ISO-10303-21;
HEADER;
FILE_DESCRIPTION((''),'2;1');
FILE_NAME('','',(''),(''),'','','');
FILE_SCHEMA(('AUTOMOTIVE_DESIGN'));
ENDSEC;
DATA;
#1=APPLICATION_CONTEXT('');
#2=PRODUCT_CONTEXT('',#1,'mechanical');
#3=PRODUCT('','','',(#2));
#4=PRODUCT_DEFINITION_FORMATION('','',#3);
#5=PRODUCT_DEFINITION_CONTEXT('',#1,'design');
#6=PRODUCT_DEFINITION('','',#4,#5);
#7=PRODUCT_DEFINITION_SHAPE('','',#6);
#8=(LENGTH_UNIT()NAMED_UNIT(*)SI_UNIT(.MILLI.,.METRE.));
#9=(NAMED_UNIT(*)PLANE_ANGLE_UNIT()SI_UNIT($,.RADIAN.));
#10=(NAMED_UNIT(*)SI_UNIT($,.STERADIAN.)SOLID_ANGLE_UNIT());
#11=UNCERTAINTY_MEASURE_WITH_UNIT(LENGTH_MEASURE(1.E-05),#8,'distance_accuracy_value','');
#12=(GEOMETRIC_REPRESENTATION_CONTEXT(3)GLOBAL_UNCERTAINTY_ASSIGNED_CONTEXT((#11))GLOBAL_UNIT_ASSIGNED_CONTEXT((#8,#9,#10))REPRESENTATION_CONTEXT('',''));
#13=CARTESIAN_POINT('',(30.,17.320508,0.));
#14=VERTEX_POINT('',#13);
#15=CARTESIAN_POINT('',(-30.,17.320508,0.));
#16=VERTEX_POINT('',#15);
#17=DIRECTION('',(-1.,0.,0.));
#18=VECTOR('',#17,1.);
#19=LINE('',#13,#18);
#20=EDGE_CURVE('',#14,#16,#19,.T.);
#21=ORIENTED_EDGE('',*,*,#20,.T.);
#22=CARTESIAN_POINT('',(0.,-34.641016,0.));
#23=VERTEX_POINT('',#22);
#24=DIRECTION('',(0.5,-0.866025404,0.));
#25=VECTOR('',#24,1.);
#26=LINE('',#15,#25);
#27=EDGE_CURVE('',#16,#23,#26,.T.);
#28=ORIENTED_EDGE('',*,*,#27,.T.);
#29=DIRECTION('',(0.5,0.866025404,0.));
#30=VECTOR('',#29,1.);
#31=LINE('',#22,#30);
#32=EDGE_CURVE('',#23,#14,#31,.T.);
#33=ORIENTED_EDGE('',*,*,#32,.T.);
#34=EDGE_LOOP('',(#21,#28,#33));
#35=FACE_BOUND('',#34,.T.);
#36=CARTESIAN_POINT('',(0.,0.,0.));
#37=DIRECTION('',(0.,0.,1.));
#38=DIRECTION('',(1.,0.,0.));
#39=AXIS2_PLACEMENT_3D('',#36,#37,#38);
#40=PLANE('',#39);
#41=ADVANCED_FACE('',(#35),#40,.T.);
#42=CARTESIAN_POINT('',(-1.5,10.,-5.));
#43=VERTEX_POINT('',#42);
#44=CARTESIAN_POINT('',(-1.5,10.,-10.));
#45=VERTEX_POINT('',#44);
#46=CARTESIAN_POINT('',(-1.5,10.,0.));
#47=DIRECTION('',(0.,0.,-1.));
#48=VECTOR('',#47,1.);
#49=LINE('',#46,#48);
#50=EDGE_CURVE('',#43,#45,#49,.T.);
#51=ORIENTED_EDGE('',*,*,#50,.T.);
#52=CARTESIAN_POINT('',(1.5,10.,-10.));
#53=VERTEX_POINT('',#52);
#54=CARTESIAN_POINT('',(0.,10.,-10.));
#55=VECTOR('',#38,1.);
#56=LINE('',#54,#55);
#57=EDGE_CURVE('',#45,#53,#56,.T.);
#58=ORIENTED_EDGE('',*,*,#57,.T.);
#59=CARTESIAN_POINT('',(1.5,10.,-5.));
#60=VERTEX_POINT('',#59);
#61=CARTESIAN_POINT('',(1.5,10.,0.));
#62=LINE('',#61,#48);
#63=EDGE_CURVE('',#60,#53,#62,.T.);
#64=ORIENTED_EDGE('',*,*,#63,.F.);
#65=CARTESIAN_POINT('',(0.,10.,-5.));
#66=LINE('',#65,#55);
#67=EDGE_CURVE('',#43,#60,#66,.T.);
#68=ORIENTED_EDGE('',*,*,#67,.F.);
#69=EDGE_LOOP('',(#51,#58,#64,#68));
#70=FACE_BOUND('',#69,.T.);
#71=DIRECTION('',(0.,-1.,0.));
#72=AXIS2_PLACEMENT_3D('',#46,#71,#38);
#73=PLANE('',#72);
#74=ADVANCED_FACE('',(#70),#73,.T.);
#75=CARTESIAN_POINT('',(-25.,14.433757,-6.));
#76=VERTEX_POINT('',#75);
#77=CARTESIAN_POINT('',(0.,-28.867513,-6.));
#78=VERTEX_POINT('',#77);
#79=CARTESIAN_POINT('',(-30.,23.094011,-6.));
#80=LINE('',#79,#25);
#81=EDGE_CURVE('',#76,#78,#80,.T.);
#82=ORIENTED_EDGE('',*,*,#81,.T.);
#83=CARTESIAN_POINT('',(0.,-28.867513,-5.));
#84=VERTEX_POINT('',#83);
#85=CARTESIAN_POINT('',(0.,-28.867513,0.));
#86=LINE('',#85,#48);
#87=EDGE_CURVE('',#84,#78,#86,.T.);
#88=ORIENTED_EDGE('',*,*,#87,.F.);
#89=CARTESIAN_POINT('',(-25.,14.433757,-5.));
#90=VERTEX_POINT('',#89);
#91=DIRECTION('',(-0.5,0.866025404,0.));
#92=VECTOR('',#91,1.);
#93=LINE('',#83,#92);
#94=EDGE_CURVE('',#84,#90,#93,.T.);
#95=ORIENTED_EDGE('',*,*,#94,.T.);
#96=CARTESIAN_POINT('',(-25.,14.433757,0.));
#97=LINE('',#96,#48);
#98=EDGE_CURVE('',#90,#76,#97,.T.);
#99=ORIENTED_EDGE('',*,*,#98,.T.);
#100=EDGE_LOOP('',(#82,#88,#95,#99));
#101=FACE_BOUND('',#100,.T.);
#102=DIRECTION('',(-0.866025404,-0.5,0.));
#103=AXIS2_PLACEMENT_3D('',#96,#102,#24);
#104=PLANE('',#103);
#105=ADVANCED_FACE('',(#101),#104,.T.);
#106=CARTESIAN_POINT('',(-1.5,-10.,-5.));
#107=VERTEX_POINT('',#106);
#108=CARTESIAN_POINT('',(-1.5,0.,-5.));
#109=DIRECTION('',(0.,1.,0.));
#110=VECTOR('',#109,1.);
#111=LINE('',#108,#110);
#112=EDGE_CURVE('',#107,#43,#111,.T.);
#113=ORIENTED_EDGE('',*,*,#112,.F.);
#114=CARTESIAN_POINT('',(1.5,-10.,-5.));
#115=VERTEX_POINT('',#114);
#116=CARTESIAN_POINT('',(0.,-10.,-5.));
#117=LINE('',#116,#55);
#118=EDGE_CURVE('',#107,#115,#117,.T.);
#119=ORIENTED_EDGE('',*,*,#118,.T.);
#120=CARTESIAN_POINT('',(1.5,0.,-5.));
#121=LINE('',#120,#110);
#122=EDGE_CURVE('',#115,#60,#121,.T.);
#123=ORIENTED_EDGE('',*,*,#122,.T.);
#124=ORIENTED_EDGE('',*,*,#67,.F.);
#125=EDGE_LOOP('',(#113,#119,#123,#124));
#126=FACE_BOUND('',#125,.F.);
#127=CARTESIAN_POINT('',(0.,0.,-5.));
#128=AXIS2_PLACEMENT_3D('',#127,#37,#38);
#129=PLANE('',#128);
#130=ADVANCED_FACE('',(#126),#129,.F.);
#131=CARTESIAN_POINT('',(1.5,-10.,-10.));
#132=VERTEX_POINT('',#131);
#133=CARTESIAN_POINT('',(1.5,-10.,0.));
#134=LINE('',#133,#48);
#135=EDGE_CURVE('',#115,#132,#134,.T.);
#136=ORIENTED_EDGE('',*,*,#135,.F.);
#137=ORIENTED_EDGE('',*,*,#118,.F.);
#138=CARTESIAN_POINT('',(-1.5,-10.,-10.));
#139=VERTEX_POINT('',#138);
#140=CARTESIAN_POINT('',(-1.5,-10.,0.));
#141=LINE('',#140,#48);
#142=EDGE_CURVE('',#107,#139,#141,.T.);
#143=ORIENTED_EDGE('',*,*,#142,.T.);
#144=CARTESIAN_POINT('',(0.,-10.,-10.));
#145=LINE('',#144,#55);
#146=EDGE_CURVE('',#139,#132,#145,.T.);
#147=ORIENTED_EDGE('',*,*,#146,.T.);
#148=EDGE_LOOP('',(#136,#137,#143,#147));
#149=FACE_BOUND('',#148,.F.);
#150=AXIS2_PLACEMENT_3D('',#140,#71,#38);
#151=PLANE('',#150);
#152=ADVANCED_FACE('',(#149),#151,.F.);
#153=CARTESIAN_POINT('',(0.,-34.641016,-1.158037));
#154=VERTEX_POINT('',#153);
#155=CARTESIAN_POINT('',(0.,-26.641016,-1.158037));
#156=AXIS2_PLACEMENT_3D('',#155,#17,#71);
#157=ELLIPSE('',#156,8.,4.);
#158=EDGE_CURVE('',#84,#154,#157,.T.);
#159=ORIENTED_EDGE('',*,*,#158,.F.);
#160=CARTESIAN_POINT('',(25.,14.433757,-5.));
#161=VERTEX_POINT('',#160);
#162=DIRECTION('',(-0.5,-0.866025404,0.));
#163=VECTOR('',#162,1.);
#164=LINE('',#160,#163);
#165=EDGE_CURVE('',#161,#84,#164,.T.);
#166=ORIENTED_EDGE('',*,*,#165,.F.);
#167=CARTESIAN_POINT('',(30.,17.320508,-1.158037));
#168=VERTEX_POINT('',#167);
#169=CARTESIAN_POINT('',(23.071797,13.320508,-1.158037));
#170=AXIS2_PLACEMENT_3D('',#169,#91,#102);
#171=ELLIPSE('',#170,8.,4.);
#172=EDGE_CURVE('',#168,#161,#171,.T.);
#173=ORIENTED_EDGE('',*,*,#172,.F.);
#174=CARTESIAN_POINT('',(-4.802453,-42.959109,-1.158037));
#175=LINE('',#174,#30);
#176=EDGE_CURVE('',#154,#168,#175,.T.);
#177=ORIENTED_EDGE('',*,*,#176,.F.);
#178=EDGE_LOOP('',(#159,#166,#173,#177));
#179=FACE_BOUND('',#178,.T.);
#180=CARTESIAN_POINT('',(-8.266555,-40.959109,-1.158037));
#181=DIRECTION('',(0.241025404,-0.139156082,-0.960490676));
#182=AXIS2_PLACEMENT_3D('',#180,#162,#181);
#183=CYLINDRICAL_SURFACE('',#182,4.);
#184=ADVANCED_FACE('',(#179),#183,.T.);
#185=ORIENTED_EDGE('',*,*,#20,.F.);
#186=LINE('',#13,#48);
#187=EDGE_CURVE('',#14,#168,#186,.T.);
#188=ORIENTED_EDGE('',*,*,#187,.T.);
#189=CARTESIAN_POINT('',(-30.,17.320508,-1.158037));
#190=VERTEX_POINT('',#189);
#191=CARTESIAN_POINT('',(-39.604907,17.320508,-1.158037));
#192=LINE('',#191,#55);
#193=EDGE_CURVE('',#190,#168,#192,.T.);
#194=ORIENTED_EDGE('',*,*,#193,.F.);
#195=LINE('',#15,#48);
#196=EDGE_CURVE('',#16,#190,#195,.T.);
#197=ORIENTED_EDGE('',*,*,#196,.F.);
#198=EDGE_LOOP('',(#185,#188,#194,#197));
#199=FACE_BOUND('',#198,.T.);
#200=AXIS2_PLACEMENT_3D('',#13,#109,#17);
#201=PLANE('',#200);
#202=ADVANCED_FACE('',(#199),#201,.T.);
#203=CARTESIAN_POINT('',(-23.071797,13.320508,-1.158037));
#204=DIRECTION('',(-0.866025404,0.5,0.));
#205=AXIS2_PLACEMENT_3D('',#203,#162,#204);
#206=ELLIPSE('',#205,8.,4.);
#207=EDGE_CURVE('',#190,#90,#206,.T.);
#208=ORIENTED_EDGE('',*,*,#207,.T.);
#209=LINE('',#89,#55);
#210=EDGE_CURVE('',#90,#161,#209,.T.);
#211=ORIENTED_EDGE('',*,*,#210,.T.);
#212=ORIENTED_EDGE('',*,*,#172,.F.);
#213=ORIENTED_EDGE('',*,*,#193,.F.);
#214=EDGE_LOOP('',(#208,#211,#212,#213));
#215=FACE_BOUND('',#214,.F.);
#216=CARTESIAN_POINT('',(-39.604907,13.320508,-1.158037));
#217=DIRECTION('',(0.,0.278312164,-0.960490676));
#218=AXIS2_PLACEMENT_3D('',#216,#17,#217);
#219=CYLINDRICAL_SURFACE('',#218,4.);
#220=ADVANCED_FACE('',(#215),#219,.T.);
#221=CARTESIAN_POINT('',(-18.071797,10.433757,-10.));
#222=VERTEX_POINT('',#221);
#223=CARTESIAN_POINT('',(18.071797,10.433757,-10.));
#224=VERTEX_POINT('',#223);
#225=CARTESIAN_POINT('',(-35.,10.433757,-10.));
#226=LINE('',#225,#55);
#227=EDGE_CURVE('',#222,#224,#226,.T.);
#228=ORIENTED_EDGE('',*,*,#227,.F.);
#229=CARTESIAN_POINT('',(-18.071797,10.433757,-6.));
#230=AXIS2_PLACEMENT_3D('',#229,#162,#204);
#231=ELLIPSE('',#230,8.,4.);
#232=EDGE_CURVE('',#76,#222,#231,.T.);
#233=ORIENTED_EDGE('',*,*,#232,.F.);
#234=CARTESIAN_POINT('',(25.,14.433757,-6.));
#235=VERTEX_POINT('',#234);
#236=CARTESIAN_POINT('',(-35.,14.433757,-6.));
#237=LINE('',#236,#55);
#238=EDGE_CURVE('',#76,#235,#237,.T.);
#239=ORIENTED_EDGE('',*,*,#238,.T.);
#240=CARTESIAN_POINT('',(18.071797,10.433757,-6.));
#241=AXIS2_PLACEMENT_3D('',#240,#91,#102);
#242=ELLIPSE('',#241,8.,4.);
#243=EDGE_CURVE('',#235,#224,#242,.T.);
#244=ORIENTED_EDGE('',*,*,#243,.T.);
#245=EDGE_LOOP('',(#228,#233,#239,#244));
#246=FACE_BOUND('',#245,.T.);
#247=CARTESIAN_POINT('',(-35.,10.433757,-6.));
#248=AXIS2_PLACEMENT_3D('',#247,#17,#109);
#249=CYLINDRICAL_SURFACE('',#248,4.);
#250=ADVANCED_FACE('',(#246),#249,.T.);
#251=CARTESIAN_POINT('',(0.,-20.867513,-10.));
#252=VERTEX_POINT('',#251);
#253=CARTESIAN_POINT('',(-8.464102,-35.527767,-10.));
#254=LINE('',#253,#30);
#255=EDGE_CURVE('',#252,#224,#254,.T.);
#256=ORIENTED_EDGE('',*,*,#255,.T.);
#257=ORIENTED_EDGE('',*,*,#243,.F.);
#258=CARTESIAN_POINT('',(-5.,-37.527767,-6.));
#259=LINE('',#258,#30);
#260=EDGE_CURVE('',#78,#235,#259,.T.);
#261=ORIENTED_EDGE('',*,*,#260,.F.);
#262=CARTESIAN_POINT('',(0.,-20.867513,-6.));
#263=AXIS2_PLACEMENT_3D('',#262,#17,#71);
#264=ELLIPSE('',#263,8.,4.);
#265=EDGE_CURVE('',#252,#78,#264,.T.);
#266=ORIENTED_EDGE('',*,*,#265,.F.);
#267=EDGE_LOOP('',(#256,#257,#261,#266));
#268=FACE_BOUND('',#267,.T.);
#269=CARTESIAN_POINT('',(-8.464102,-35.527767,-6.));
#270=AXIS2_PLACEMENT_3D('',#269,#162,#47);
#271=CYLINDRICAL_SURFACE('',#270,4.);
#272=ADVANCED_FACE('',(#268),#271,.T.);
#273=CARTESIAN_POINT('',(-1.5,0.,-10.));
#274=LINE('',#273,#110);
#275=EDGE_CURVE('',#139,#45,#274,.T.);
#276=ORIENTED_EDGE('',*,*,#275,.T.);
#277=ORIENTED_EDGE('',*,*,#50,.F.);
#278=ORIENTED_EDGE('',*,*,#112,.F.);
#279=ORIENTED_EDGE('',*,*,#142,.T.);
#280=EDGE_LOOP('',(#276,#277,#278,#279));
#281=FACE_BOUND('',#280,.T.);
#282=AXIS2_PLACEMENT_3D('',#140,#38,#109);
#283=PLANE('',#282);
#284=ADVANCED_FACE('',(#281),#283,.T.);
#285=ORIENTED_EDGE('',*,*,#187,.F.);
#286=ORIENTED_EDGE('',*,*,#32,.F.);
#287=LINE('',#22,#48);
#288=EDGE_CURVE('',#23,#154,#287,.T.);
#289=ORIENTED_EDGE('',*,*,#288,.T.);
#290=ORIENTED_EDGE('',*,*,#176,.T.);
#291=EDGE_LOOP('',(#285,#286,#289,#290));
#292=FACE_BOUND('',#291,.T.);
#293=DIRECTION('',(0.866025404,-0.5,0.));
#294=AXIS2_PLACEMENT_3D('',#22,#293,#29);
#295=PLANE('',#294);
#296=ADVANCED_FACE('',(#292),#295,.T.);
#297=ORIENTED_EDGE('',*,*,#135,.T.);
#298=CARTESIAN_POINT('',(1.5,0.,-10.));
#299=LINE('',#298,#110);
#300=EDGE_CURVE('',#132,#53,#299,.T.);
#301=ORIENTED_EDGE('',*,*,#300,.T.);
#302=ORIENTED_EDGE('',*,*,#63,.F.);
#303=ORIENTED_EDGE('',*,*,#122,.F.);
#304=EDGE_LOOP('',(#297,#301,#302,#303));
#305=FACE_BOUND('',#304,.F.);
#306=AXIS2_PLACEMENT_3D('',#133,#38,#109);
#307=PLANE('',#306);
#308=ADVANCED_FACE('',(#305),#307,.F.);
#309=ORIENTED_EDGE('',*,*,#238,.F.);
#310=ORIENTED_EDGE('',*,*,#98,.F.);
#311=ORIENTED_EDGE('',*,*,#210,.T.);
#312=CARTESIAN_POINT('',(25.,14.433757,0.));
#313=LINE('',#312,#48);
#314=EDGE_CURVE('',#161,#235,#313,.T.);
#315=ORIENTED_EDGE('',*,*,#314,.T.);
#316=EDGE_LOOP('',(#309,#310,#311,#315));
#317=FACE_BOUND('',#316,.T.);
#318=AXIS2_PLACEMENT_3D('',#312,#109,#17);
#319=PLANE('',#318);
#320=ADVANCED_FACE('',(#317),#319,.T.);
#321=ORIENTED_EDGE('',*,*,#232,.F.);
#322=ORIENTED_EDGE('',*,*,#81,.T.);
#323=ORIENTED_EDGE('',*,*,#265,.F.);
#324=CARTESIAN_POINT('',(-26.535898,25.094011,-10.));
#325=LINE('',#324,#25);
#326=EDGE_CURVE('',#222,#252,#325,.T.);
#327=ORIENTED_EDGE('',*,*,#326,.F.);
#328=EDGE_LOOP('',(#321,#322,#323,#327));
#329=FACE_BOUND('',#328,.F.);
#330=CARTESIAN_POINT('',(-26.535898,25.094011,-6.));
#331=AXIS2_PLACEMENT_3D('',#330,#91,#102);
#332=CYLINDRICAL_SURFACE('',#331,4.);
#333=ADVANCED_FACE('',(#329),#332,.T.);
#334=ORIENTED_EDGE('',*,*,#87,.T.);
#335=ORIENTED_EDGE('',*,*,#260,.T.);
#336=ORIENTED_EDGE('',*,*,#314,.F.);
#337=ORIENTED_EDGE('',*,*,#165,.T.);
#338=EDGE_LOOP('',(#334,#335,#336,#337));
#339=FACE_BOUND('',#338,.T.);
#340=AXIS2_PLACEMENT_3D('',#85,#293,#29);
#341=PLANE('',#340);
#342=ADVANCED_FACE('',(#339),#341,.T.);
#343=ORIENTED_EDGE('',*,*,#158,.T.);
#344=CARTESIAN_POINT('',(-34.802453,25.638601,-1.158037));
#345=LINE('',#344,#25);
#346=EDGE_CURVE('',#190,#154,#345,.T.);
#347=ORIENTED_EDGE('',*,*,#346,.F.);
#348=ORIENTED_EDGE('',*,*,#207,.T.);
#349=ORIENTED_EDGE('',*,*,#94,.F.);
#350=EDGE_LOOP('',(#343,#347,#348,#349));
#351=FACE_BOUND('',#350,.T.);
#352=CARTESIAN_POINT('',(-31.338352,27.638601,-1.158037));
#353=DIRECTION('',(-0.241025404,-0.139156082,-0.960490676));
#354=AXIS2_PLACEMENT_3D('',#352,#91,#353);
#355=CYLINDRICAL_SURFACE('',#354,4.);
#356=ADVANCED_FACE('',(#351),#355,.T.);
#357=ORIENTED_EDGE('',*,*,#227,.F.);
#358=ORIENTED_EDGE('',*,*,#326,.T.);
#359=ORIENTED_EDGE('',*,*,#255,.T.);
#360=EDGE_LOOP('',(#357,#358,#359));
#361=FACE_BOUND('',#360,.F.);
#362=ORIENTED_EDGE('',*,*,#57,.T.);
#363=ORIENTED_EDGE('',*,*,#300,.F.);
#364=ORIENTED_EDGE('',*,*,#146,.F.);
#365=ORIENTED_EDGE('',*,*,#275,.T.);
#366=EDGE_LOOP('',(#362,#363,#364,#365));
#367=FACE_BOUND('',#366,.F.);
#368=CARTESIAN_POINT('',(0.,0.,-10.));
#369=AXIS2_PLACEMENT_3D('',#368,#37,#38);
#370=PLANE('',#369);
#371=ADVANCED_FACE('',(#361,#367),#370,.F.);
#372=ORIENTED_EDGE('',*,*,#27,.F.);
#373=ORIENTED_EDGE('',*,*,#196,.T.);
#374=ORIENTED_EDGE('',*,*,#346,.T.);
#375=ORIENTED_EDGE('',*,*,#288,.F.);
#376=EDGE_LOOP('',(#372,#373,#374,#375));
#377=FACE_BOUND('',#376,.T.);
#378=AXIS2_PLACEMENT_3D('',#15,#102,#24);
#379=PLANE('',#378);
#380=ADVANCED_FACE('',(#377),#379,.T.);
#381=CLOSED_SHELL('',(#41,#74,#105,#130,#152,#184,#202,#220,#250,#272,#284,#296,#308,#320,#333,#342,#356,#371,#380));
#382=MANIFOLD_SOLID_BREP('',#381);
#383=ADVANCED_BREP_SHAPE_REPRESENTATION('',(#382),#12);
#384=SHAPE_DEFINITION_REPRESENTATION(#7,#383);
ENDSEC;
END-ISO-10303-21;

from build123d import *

# Parameters (mm, degrees)
F0_W         = 3
F0_H         = 20
F1_DEPTH     = 10
F2_DEPTH     = 5
F3_T1_DEPTH  = 70
F3_T3_DEPTH  = 79.20981353
F3_T5_DEPTH  = 70
F3_T7_DEPTH  = 70
F3_T9_DEPTH  = 79.20981353
F3_T11_DEPTH = 79.20981353


# Not quite as in the source:
# - a fillet or chamfer that OpenCascade refuses, or shapes differently, is made with other operations: its cross-section is extruded or revolved along the edge and cut away or added


with BuildPart() as f1:
    # F0 (on Top) → F1 (new body)
    with BuildSketch(Plane.XY):
        Polygon((25, 14.4337567297), (-25, 14.4337567297), (0, -28.8675134595), align=None)
        Rectangle(F0_W, F0_H, mode=Mode.SUBTRACT)
    extrude(amount=-F1_DEPTH)

    # F0 (on Top) → F2 (join)
    with BuildSketch(Plane.XY):
        Polygon((30, 17.3205080757), (-30, 17.3205080757), (0, -34.6410161514), align=None)
        Polygon((0, -28.8675134595), (-25, 14.4337567297), (25, 14.4337567297), align=None, mode=Mode.SUBTRACT)
        Rectangle(F0_W, F0_H)
    extrude(amount=-F2_DEPTH)

    # F3: fillet of radius 4 on 6 edges, made by hand

    # F3_s2 → F3_t1 (cut)
    with BuildSketch(Plane.YZ.offset(-35)):
        with BuildLine():
            ThreePointArc((14.4337567297, -6), (13.2621838545, -8.8284271247), (10.4337567297, -10))
            Line((10.4337567297, -10), (14.4337567297, -10))
            Line((14.4337567297, -10), (14.4337567297, -6))
        make_face()
    extrude(amount=F3_T1_DEPTH, mode=Mode.SUBTRACT)

    # F3_s4 → F3_t3 (cut)
    with BuildSketch(Plane.YZ.offset(-39.604906765)):
        with BuildLine():
            ThreePointArc((14.4337567297, -5), (16.5183975841, -3.5608487081), (17.3205080757, -1.158037294))
            Line((17.3205080757, -1.158037294), (17.3205080757, -5))
            Line((17.3205080757, -5), (14.4337567297, -5))
        make_face()
    extrude(amount=F3_T3_DEPTH, mode=Mode.SUBTRACT)

    # F3_s6 → F3_t5 (cut)
    with BuildSketch(Plane(origin=(-17.5, -30.3108891325, 0), x_dir=(0, 0, 1), z_dir=(0.5, 0.8660254038, 0))):
        with BuildLine():
            ThreePointArc((-10, 10.4337567297), (-8.8284271247, 13.2621838545), (-6, 14.4337567297))
            Line((-6, 14.4337567297), (-10, 14.4337567297))
            Line((-10, 14.4337567297), (-10, 10.4337567297))
        make_face()
    extrude(amount=F3_T5_DEPTH, mode=Mode.SUBTRACT)

    # F3_s8 → F3_t7 (cut)
    with BuildSketch(Plane(origin=(-17.5, 30.3108891325, 0), x_dir=(0, 0, 1), z_dir=(0.5, -0.8660254038, 0))):
        with BuildLine():
            ThreePointArc((-6, 14.4337567297), (-8.8284271247, 13.2621838545), (-10, 10.4337567297))
            Line((-10, 10.4337567297), (-10, 14.4337567297))
            Line((-10, 14.4337567297), (-6, 14.4337567297))
        make_face()
    extrude(amount=F3_T7_DEPTH, mode=Mode.SUBTRACT)

    # F3_s10 → F3_t9 (cut)
    with BuildSketch(Plane(origin=(-19.8024533825, -34.298855373, 0), x_dir=(0, 0, 1), z_dir=(0.5, 0.8660254038, 0))):
        with BuildLine():
            ThreePointArc((-5, 14.4337567297), (-3.5608487081, 16.5183975841), (-1.158037294, 17.3205080757))
            Line((-1.158037294, 17.3205080757), (-5, 17.3205080757))
            Line((-5, 17.3205080757), (-5, 14.4337567297))
        make_face()
    extrude(amount=F3_T9_DEPTH, mode=Mode.SUBTRACT)

    # F3_s12 → F3_t11 (cut)
    with BuildSketch(Plane(origin=(-19.8024533825, 34.298855373, 0), x_dir=(0, 0, 1), z_dir=(0.5, -0.8660254038, 0))):
        with BuildLine():
            ThreePointArc((-5, 14.4337567297), (-3.5608487081, 16.5183975841), (-1.158037294, 17.3205080757))
            Line((-1.158037294, 17.3205080757), (-5, 17.3205080757))
            Line((-5, 17.3205080757), (-5, 14.4337567297))
        make_face()
    extrude(amount=F3_T11_DEPTH, mode=Mode.SUBTRACT)


solid = f1.part
